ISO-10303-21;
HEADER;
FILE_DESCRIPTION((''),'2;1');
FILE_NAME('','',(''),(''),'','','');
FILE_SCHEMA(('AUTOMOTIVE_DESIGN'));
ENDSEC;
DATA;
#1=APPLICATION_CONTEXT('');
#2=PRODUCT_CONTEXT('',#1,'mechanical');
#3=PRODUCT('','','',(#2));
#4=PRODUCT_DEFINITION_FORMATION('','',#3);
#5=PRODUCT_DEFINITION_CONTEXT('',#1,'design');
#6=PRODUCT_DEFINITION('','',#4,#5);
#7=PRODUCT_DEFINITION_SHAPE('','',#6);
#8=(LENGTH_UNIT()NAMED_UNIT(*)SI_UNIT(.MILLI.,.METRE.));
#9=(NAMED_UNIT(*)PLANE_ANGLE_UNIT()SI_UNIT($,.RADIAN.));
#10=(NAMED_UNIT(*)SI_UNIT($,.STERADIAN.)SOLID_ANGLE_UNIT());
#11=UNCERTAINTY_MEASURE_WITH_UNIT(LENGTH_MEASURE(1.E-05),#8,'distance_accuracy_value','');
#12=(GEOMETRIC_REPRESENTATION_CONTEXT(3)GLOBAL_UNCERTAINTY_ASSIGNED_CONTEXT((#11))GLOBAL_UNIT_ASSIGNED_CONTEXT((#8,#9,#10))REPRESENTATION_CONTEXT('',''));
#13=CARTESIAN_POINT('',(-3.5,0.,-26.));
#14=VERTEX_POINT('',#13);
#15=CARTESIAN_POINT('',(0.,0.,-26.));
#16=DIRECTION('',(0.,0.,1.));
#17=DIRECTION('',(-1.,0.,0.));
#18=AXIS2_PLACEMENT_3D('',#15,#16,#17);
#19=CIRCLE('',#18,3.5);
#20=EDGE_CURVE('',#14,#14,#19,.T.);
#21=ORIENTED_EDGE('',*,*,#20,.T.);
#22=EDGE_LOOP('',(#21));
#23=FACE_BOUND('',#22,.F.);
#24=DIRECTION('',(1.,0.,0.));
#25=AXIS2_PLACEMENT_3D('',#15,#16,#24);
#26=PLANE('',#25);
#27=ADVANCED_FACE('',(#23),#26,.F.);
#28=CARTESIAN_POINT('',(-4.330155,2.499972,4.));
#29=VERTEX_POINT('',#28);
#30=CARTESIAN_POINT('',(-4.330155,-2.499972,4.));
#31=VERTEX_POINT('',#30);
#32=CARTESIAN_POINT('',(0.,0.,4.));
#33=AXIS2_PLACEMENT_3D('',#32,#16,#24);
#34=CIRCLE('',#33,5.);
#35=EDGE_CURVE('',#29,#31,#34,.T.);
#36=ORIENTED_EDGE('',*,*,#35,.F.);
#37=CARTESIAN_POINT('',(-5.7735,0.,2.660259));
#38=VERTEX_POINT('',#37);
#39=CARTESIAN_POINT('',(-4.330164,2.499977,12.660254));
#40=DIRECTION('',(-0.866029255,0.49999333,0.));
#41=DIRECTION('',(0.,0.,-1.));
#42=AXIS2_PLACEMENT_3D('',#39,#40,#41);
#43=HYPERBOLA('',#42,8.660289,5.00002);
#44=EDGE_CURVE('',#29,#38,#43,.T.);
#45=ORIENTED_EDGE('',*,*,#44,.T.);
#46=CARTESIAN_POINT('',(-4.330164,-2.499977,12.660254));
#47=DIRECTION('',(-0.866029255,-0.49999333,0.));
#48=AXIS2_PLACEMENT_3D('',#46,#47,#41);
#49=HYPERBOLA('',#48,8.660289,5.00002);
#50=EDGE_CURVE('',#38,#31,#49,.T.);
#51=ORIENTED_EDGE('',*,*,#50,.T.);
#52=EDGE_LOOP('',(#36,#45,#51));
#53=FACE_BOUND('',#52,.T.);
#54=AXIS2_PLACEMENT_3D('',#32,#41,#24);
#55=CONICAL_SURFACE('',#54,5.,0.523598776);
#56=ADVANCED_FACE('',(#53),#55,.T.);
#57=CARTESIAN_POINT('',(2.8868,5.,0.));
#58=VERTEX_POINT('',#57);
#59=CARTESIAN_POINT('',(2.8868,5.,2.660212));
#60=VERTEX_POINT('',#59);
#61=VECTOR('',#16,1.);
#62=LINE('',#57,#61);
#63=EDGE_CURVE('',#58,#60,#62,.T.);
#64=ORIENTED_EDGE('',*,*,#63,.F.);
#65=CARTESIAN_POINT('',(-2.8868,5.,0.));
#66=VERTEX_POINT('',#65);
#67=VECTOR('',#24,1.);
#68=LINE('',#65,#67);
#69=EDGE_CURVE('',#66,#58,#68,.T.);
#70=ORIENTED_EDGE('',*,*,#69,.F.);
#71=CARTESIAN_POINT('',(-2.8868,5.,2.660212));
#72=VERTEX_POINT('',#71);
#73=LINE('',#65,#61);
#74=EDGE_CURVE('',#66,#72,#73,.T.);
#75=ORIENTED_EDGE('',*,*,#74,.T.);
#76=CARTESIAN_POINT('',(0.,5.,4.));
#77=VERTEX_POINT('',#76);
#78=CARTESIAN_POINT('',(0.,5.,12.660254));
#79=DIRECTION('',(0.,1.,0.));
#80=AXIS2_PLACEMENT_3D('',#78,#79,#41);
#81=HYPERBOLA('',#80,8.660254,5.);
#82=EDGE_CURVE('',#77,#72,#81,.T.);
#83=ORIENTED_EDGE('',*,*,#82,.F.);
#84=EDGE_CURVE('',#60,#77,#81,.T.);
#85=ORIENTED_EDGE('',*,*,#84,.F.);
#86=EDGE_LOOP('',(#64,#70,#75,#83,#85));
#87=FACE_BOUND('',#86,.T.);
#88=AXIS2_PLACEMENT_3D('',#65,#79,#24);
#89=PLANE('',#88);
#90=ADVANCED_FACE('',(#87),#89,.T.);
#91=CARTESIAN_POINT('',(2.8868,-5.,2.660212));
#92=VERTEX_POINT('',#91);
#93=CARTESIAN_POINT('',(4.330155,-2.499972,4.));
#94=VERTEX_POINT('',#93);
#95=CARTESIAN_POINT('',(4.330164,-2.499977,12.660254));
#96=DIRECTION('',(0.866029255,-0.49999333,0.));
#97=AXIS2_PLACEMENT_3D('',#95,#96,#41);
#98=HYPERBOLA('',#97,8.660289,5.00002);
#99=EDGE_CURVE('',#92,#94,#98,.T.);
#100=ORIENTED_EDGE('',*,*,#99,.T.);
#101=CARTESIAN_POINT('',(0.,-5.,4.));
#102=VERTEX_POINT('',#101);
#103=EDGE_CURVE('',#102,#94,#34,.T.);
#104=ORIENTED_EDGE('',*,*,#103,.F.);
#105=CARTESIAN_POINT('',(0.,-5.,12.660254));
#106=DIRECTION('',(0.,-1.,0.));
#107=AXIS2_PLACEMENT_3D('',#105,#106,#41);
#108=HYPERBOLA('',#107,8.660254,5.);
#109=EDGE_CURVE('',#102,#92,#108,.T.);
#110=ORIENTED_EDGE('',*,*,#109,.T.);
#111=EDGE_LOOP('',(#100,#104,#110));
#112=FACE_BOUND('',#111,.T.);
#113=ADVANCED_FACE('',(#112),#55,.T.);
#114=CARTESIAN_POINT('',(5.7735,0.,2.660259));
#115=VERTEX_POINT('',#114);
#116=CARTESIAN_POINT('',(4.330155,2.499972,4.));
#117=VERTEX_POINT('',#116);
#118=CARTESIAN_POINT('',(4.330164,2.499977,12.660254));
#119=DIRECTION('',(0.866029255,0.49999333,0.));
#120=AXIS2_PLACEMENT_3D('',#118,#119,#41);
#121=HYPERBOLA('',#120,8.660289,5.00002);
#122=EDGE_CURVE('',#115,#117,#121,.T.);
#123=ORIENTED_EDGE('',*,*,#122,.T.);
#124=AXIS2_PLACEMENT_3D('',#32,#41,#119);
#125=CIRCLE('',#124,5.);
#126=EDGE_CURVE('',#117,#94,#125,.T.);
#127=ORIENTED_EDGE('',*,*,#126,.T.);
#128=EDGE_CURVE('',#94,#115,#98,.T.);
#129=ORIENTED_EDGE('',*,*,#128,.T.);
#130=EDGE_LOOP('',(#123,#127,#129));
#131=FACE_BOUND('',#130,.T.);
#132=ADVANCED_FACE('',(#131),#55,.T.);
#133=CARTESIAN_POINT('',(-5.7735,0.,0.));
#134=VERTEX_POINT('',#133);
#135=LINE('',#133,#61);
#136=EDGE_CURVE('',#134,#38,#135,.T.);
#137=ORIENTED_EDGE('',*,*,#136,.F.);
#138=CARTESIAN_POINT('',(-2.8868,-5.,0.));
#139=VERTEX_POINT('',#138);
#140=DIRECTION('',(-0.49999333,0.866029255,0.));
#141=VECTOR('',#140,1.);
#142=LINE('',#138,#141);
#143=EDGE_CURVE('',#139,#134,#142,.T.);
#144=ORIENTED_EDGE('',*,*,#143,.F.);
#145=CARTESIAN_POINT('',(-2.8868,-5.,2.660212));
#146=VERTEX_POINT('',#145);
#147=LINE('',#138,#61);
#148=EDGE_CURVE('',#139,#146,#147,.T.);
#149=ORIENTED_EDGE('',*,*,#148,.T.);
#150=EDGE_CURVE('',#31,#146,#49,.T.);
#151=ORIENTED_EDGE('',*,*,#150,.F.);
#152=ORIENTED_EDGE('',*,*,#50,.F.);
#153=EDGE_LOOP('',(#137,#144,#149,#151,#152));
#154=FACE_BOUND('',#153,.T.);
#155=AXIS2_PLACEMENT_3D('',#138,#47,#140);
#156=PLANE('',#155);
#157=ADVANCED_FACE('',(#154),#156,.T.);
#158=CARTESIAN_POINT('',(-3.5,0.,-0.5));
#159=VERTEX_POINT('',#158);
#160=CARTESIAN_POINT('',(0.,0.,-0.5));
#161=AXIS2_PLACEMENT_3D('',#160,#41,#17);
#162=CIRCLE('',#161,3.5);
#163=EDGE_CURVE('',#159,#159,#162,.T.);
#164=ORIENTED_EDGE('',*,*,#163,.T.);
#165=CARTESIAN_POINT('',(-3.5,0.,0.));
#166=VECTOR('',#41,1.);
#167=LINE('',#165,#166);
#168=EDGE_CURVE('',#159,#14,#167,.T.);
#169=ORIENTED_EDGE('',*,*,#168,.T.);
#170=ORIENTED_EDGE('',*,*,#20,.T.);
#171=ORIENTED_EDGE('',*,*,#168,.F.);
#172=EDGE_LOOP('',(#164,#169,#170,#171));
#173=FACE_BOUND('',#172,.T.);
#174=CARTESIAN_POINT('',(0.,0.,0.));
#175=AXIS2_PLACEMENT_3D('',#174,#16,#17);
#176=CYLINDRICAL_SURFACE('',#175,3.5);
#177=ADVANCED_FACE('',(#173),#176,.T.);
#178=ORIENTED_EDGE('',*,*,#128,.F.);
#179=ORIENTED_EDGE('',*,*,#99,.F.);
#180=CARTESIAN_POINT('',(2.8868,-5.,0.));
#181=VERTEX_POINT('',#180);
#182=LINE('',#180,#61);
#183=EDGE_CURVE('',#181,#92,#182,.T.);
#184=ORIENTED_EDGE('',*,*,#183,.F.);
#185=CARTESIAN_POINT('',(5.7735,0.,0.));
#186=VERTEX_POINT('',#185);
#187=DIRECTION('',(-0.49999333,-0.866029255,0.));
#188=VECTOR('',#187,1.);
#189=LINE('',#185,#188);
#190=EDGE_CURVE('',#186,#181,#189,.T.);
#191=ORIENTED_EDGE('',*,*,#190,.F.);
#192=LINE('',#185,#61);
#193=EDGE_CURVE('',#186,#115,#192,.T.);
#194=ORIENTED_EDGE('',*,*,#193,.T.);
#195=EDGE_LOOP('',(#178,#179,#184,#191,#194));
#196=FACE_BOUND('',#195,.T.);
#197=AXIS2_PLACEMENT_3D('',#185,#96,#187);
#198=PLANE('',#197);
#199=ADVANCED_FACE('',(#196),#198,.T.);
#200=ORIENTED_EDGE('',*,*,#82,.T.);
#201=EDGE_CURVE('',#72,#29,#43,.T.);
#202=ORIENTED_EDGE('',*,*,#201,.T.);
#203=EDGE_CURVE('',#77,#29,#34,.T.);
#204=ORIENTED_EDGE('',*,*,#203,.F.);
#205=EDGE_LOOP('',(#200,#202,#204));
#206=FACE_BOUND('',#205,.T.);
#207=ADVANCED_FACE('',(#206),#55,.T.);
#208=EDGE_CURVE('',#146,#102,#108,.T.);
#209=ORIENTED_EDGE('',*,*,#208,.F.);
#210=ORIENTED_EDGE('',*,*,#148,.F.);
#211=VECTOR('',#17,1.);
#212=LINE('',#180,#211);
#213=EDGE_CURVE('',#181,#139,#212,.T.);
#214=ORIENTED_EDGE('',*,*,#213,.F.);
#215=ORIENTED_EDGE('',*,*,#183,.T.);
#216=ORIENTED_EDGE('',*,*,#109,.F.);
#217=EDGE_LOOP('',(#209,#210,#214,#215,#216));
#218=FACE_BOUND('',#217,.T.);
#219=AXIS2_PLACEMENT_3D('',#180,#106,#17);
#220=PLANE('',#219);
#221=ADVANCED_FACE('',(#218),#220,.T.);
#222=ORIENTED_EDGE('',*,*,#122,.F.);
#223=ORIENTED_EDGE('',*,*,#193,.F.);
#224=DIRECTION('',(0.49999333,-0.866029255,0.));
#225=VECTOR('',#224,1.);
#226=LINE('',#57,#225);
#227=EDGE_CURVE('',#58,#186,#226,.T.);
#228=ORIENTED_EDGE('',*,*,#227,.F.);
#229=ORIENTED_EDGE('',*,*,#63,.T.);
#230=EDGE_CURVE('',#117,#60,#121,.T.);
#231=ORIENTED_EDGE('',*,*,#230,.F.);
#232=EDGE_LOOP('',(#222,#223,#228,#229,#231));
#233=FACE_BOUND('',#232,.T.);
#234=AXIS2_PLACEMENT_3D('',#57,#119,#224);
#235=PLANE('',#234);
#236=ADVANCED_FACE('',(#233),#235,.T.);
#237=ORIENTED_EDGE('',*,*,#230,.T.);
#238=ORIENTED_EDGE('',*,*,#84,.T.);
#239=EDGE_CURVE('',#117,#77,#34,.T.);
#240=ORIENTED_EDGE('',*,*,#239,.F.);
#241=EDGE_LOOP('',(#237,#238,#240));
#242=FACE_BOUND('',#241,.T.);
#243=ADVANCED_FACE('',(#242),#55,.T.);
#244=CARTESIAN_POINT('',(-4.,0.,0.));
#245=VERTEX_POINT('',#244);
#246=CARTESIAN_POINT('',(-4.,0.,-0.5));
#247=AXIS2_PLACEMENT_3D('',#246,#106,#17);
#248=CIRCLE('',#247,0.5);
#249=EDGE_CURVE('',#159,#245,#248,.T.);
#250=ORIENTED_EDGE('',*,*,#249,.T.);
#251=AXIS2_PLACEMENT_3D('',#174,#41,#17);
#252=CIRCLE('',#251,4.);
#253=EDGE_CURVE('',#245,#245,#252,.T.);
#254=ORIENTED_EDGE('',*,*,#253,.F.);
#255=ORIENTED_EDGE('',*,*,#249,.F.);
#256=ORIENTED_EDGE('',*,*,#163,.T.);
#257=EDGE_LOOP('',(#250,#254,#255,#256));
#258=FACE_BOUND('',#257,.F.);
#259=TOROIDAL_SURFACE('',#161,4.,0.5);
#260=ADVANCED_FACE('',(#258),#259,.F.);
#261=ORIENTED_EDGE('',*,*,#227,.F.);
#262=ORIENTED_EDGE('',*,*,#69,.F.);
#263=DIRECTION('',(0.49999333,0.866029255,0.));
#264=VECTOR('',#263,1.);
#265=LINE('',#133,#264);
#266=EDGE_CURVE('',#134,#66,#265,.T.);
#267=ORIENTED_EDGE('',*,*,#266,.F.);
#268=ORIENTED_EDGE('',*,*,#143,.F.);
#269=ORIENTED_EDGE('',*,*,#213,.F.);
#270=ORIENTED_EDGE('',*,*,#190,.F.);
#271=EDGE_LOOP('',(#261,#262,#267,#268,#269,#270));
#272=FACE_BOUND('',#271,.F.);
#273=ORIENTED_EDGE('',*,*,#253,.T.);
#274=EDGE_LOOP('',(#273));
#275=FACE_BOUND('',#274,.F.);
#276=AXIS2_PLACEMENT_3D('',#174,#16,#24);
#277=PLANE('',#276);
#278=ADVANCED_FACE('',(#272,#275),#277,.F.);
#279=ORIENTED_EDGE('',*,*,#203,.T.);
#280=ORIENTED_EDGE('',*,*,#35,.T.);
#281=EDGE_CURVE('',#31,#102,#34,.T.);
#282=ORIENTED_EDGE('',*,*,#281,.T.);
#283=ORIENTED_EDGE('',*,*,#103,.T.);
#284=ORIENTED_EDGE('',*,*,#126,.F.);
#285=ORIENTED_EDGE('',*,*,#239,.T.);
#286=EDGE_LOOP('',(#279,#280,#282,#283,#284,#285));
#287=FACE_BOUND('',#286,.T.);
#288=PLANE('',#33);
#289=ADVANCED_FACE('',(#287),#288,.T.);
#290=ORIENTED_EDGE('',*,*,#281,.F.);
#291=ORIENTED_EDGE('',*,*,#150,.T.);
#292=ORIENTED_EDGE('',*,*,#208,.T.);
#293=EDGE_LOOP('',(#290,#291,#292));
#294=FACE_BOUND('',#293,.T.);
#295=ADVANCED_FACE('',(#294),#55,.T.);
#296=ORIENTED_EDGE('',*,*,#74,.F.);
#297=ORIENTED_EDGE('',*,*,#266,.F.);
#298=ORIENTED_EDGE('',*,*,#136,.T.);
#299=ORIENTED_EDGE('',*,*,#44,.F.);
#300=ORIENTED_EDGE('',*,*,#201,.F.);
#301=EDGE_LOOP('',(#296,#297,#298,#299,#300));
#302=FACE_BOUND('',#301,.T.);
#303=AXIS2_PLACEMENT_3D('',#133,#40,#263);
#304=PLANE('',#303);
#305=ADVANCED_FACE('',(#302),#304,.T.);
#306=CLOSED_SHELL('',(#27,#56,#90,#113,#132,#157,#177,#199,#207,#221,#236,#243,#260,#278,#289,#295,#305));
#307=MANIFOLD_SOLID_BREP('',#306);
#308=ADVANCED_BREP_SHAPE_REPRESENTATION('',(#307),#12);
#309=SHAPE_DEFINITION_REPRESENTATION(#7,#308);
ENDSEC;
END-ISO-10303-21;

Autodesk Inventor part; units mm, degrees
ref_plane "YZ Plane" through (0, 0, 0) normal (1, 0, 0) x (0, 1, 0)
ref_plane "XZ Plane" through (0, 0, 0) normal (0, 1, 0) x (-1, 0, 0)
ref_plane "XY Plane" through (0, 0, 0) normal (0, 0, 1) x (1, 0, 0)
sketch "Sketch1" plane through (0, 0, 0) normal (0, 0, 1) x (1, 0, 0)
  line L0 (2.8868, 5) -> (5.7735, 0)
  line L1 (5.7735, 0) -> (2.8868, -5)
  line L2 (2.8868, -5) -> (-2.8868, -5)
  line L3 (-2.8868, -5) -> (-5.7735, 0)
  line L4 (-5.7735, 0) -> (-2.8868, 5)
  line L5 (-2.8868, 5) -> (2.8868, 5)
  point P0 (0, 0)
  point P1 (0, 0)
  dimension "d0" = 10
extrude "Extrusion1" add sketch "Sketch1" along normal blind 4
sketch "Sketch2" plane through (0, 0, 0) normal (0, 0, -1) x (-1, 0, 0)
  circle A0 centre (0, 0) radius 3.5
  dimension "d3" = 7
extrude "Extrusion2" add sketch "Sketch2" along normal blind 30
thread "Thread1" size "M7x1" class "6g" standard "ANSI Metric M Profile" length 30 offset 1.5
fillet "Fillet1" radius 1 1 edges at (3.5, 0, -30)
fillet "Fillet2" radius 0.5 1 edges at (3.5, 0, 0)
sketch "Sketch4" plane through (0, 0, 4) normal (0, 0, 1) x (1, 0, 0)
  circle A0 centre (0, 0) radius 5
  line L0 (5.7735, 0) -> (2.8868, 5) projected
extrude "Extrusion4" cut sketch "Sketch4" against normal blind 30 draft 30 keep common part
properties part number "Bolt 1.0"
